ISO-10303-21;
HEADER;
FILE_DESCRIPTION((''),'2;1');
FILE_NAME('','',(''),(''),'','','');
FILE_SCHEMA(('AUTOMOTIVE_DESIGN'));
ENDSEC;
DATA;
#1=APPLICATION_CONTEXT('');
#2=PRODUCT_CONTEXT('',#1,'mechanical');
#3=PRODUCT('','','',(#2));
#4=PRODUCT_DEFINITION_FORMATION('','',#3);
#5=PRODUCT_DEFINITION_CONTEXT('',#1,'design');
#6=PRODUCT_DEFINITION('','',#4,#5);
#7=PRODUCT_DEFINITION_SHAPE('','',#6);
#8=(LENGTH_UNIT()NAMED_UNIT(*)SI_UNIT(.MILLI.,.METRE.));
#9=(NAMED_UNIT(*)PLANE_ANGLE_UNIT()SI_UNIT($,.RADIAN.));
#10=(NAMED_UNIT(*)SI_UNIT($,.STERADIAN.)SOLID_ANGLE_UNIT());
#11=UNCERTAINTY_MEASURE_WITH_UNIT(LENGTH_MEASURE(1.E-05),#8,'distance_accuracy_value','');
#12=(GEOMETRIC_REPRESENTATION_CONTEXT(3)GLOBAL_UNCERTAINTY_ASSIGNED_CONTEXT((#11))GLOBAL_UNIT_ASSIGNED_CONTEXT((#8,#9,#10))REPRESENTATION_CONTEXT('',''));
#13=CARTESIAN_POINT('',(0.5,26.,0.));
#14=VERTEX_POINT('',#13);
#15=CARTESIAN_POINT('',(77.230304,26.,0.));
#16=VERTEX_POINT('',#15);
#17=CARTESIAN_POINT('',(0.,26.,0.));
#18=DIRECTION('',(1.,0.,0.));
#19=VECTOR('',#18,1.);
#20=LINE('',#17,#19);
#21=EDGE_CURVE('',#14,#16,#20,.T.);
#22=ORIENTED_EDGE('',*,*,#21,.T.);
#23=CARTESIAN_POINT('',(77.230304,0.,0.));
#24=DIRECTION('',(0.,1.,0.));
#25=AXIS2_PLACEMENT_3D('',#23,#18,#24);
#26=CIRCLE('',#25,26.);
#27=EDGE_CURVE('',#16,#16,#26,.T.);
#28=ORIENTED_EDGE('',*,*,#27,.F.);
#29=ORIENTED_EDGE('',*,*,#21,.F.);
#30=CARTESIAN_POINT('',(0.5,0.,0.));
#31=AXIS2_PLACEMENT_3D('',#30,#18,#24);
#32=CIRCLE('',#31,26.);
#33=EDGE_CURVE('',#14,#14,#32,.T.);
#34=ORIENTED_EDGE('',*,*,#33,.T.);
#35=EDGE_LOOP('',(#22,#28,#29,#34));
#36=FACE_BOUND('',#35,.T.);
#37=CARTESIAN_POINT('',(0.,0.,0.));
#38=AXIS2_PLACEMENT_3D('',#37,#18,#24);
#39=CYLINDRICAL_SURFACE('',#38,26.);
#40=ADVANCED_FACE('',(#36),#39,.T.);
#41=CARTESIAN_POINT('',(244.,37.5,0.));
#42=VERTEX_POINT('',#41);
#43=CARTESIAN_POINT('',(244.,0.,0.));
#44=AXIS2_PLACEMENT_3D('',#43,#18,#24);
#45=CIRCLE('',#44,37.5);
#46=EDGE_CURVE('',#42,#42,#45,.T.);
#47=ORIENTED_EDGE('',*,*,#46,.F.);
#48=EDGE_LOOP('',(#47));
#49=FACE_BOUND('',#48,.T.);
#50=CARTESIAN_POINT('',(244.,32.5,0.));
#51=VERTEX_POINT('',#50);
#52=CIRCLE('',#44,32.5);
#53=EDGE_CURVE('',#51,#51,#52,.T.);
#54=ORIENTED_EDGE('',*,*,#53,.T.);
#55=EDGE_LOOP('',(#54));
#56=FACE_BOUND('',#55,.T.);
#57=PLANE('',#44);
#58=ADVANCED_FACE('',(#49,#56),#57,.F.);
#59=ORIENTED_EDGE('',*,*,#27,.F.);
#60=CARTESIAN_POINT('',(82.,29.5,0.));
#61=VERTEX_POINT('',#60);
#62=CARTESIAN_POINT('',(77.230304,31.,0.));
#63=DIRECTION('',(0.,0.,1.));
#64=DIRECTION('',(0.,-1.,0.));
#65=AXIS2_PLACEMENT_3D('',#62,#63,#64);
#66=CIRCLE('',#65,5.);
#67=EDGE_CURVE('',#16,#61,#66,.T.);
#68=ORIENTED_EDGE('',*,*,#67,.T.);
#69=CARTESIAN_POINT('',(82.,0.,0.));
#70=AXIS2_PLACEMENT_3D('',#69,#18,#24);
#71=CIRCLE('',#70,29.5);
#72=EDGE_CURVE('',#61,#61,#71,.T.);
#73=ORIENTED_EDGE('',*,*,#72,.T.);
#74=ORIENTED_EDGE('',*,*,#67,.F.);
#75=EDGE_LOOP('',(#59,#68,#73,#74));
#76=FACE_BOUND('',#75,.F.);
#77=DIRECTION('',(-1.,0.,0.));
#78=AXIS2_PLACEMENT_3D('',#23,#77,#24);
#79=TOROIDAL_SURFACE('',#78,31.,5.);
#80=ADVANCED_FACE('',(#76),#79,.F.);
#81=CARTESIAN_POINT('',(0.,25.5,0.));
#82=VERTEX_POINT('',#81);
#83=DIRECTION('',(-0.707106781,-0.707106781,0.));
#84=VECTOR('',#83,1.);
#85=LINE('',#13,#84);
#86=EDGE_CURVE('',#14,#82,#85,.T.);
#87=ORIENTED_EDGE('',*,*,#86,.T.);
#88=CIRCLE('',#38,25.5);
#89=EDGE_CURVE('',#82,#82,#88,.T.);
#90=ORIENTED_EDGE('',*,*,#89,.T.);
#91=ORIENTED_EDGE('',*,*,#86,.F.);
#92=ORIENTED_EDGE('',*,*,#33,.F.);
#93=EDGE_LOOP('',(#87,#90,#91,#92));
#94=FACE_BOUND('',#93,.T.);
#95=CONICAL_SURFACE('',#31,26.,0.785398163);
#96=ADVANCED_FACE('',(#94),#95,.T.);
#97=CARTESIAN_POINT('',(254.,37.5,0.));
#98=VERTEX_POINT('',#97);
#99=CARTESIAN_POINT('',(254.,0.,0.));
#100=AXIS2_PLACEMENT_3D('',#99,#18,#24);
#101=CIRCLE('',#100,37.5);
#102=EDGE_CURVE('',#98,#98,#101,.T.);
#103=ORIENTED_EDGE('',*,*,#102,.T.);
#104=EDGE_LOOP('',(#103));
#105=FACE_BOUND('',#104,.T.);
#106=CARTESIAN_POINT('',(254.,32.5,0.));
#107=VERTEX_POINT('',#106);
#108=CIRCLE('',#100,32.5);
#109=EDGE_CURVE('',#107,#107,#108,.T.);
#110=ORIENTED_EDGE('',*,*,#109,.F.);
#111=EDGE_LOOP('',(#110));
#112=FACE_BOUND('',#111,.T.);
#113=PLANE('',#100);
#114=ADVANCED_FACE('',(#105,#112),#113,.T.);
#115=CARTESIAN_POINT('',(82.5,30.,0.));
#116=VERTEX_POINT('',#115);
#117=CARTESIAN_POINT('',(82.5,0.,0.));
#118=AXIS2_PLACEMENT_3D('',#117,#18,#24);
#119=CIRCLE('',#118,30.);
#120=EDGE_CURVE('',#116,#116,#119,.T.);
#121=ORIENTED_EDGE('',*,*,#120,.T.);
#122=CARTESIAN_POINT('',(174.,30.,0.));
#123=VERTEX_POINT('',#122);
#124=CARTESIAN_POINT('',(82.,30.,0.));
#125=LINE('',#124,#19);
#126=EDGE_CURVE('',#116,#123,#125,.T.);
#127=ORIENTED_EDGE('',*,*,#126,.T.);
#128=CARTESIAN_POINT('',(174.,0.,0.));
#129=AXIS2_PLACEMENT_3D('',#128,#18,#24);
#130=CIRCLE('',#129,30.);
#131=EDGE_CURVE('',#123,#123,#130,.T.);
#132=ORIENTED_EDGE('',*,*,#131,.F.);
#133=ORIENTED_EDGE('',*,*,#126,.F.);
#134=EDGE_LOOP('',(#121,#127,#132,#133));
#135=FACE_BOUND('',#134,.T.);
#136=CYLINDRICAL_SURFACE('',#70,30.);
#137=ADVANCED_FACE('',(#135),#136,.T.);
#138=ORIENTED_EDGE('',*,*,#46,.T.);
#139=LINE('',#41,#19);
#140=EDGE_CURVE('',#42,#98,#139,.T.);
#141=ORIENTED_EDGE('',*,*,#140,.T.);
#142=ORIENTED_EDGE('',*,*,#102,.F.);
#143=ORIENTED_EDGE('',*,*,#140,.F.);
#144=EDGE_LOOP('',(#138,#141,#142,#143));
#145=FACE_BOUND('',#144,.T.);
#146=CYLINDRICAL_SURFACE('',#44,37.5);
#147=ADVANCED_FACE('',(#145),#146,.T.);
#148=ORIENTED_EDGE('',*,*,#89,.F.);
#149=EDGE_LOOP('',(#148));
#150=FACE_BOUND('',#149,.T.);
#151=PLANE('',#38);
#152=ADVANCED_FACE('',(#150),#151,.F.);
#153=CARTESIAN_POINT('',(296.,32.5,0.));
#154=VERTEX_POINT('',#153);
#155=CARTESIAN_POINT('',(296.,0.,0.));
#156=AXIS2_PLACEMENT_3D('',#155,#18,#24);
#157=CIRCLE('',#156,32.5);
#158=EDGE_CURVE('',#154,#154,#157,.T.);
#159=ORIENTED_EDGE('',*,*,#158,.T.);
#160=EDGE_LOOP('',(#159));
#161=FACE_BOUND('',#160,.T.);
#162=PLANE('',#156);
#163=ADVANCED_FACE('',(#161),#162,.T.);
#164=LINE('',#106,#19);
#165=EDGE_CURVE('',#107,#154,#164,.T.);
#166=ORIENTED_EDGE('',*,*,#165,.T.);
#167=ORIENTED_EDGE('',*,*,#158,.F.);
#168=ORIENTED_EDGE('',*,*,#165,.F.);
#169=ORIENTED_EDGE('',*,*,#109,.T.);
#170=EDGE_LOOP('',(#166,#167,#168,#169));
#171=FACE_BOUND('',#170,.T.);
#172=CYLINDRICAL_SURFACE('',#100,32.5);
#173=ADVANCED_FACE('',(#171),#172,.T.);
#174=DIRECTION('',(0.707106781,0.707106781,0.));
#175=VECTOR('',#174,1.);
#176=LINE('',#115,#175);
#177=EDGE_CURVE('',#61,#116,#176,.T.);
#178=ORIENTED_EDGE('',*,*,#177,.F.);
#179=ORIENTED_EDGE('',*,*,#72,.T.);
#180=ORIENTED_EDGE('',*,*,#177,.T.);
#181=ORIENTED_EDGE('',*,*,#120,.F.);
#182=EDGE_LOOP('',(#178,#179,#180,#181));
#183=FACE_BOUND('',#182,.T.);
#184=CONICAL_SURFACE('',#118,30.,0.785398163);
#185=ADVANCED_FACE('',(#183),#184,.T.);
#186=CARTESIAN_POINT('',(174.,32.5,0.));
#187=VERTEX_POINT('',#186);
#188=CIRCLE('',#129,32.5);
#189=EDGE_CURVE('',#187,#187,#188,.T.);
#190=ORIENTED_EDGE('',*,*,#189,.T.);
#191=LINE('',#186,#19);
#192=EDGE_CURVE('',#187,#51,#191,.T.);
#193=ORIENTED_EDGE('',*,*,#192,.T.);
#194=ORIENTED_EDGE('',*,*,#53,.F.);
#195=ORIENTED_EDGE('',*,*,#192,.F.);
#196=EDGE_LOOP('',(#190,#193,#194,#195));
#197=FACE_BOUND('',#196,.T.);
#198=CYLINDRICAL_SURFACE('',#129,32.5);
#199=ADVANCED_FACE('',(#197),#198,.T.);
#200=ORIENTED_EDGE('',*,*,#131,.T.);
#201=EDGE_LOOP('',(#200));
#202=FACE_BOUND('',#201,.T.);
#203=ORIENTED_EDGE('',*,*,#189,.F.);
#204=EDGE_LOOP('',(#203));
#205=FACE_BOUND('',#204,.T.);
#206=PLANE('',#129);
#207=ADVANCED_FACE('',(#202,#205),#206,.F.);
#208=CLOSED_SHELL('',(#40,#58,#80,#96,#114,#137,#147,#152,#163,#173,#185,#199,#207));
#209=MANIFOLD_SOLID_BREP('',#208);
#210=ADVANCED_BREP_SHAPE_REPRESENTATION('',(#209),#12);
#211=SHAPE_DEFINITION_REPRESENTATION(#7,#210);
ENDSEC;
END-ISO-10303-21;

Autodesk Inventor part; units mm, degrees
ref_plane "Начальная плоскость" through (0, 0, 0) normal (1, 0, 0) x (0, 1, 0)
ref_plane "XZ Plane" through (0, 0, 0) normal (0, 1, 0) x (-1, 0, 0)
ref_plane "XY Plane" through (0, 0, 0) normal (0, 0, 1) x (1, 0, 0)
sketch "Основной эскиз" plane through (0, 0, 0) normal (0, 0, 1) x (1, 0, 0)
  line L0 (0, 0) -> (296, 0)
  line L1 (0, 0) -> (0, 26)
  line L2 (0, 26) -> (82, 26)
  line L3 (82, 26) -> (82, 30)
  line L4 (82, 30) -> (174, 30)
  line L5 (174, 30) -> (174, 32.5)
  line L6 (174, 32.5) -> (244, 32.5)
  line L7 (244, 32.5) -> (244, 37.5)
  line L8 (254, 37.5) -> (254, 32.5)
  line L9 (244, 37.5) -> (254, 37.5)
  line L10 (296, 32.5) -> (296, 0)
  line L11 (254, 32.5) -> (296, 32.5)
  dimension "d3" = 52
  dimension "d4" = 60
  dimension "d5" = 65
  dimension "d6" = 75
  dimension "d7" = 65
revolve "Вращение1" add sketch "Основной эскиз" angle 360 about axis through (0, 0, 0) along (1, 0, 0)
chamfer "Фаска3" distance 0.5 angle 45 1 edges at (82, -30, 0) measured on face at (143.3333, 29.9027, -2.414)
chamfer "Фаска1" distance 0.5 angle 45 1 edges at (0, -26, 0) measured on face at (54.6667, 25.9157, -2.0921)
fillet "Сопряжение1" radius 5 1 edges at (82, -26, 0)
equation "\"Length\" = 296"
properties part number "ТихВал" material "Steel"
